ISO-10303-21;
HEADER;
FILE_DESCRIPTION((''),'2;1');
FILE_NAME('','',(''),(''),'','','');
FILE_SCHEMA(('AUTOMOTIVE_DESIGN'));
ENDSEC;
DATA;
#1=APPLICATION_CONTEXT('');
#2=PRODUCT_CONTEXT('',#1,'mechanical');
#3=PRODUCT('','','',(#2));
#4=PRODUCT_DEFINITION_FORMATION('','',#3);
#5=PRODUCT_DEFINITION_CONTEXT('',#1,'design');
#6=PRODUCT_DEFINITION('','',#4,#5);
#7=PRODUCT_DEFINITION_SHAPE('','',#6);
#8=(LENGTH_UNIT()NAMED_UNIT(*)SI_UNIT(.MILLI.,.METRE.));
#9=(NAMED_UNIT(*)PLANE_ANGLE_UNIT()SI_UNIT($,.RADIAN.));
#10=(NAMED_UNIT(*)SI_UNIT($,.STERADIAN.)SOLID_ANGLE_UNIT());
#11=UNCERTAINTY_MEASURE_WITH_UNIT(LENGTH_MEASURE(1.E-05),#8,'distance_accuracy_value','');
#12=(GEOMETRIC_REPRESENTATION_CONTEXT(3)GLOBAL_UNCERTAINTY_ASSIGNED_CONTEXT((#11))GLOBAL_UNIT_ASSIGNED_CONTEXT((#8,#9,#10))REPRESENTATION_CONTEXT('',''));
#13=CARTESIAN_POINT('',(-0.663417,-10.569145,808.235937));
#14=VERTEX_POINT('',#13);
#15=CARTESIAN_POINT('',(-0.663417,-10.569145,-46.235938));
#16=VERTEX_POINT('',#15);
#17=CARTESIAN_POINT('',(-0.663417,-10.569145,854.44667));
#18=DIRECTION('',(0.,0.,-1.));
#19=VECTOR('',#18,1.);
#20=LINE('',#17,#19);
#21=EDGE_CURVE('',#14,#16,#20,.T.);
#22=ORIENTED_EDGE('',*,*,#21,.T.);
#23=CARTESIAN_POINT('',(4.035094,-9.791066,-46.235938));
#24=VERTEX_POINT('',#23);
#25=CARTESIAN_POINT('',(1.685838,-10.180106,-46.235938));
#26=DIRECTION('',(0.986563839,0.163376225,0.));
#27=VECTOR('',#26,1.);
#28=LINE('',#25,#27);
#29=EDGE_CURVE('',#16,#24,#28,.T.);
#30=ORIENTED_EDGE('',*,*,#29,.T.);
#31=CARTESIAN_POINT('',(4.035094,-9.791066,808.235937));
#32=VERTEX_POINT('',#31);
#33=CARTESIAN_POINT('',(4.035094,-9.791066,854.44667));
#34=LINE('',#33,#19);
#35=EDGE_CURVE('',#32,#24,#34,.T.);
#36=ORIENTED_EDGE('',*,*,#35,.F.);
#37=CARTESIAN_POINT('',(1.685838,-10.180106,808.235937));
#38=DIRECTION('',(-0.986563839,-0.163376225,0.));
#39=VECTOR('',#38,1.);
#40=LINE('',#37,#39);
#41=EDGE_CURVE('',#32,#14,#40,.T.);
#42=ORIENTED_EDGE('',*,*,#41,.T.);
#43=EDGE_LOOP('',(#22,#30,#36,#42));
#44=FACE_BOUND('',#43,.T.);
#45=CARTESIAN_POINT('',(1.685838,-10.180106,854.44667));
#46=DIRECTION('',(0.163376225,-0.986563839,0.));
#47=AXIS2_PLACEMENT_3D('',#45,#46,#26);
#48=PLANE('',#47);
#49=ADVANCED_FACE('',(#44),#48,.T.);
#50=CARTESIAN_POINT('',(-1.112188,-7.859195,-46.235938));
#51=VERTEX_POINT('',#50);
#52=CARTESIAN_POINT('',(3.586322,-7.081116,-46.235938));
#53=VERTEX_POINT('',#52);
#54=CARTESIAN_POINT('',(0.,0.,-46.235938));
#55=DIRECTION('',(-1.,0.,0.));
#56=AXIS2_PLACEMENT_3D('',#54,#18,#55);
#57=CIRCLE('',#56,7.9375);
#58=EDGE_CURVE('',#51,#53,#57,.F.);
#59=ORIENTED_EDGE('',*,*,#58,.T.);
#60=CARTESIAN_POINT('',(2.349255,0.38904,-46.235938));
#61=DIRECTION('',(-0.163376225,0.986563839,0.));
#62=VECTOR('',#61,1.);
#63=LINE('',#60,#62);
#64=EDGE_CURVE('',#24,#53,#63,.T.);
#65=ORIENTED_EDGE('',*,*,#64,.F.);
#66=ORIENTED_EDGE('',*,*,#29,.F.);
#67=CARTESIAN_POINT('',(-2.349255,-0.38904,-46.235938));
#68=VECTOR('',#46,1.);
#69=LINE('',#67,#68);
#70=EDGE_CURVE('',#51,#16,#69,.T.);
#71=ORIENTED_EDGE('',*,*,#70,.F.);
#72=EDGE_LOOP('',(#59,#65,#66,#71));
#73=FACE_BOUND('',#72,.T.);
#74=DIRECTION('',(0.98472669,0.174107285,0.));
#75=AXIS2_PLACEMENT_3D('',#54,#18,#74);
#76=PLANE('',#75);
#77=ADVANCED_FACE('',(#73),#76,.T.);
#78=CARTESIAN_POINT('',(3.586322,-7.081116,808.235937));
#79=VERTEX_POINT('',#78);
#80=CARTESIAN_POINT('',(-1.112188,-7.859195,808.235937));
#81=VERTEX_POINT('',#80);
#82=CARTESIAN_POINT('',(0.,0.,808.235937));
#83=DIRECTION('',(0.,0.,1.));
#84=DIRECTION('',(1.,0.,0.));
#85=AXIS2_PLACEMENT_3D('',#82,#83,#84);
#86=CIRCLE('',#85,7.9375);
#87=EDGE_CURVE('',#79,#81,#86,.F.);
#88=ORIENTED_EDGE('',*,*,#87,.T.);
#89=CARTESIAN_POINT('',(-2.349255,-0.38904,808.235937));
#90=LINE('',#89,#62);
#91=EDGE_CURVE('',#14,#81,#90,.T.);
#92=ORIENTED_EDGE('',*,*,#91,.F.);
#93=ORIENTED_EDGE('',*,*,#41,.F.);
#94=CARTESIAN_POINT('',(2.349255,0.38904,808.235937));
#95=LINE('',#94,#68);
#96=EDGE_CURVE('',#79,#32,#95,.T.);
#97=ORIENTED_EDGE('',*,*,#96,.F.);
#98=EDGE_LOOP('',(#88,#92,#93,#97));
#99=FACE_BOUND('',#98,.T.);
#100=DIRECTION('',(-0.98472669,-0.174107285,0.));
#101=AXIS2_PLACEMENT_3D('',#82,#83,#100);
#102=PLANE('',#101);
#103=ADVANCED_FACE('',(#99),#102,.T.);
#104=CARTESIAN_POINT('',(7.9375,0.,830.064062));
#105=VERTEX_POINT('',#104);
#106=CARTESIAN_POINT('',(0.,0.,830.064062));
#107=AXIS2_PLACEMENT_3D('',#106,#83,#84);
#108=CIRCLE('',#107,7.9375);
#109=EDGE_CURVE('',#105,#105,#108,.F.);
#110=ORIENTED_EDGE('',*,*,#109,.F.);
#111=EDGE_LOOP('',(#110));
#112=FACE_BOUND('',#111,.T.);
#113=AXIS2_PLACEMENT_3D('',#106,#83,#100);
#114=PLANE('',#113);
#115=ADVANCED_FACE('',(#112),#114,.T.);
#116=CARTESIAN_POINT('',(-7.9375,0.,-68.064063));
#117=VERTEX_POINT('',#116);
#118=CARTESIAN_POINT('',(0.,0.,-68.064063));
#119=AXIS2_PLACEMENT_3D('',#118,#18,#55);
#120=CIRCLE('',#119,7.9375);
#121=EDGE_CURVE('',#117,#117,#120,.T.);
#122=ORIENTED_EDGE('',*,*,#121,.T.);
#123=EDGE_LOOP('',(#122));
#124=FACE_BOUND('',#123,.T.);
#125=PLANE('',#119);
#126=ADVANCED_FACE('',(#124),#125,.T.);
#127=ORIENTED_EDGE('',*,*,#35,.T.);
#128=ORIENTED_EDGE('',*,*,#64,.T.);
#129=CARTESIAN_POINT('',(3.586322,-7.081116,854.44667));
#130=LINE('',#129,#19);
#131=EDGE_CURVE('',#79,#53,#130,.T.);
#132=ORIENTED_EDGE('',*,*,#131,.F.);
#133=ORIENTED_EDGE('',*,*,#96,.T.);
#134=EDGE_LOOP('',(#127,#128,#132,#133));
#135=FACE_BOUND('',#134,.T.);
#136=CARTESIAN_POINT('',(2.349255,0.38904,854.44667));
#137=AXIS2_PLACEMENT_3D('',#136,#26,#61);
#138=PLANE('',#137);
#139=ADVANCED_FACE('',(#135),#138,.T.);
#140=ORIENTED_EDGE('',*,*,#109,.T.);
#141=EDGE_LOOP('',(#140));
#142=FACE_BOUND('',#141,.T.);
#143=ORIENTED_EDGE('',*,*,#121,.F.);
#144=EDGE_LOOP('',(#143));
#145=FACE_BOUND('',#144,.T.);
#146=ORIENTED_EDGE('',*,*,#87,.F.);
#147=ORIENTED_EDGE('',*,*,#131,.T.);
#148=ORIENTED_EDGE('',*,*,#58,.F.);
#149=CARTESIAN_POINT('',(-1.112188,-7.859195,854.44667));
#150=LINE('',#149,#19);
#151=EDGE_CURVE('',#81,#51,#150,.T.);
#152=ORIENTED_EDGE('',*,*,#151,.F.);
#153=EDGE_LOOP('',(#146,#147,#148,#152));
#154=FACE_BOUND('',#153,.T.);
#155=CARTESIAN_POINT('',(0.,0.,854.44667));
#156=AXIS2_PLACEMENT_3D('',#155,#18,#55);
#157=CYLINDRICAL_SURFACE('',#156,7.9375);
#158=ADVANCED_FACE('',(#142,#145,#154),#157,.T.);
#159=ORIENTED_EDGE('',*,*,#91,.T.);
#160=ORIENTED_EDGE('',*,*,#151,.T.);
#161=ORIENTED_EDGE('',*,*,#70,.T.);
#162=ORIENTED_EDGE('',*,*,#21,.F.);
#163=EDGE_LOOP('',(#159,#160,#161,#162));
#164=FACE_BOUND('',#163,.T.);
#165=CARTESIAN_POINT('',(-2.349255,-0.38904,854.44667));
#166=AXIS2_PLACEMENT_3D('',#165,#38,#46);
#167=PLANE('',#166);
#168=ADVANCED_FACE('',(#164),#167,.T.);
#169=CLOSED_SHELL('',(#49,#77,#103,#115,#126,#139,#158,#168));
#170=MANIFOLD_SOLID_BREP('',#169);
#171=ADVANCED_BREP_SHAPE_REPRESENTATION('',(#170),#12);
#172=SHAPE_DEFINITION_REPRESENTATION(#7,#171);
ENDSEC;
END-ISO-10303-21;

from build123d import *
from OCP.BRepAlgoAPI import BRepAlgoAPI_Cut
from OCP.TopTools import TopTools_ListOfShape

# Parameters (mm, degrees)
BOSS_EXTRUDE1_START = -68.064063
BOSS_EXTRUDE1_DEPTH = 898.128125
CUT_EXTRUDE1_START  = -21.828125
SKETCH2_R           = 10.589945851
SKETCH2_R_2         = 7.9375
CUT_EXTRUDE1_DEPTH  = 21.828125
CUT_EXTRUDE2_START  = -898.128125
SKETCH2_2_R         = 10.589945851
SKETCH2_2_R_2       = 7.9375
CUT_EXTRUDE2_DEPTH  = 21.828125


with BuildPart() as part:
    # Sketch1 → Boss-Extrude1 (new body)
    with BuildSketch(Plane.XY.offset(BOSS_EXTRUDE1_START)):
        with BuildLine():
            Line((4.035093565, -9.791065981), (3.586322342, -7.081115612))
            ThreePointArc((3.586322342, -7.081115612), (-1.296798787, 7.830850475), (-1.112187943, -7.859194884))
            Line((-1.112187943, -7.859194884), (-0.663416719, -10.569145253))
            Line((-0.663416719, -10.569145253), (4.035093565, -9.791065981))
        make_face()
    extrude(amount=BOSS_EXTRUDE1_DEPTH)

    # Sketch2 → Cut-Extrude1 (cut)
    with BuildSketch(Plane.XY.offset(830.0640625).offset(CUT_EXTRUDE1_START)):
        Circle(SKETCH2_R)
        with Locations(Location((0, 0, 0), (0, 0, 261.945315936))):
            Circle(SKETCH2_R_2, mode=Mode.SUBTRACT)
    extrude(amount=CUT_EXTRUDE1_DEPTH, mode=Mode.SUBTRACT)


with BuildPart() as cut_extrude2_tool:
    # Sketch2<2> → Cut-Extrude2 (new body)
    with BuildSketch(Plane.XY.offset(830.0640625).offset(CUT_EXTRUDE2_START)):
        Circle(SKETCH2_2_R)
        with Locations(Location((0, 0, 0), (0, 0, 180))):
            Circle(SKETCH2_2_R_2, mode=Mode.SUBTRACT)
    extrude(amount=CUT_EXTRUDE2_DEPTH)


with BuildPart() as part_1:
    add(part.part)

    # Cut-Extrude2: cut by cut_extrude2_tool, with a tolerance
    cut_extrude2_stock = TopTools_ListOfShape()
    cut_extrude2_stock.Append(part_1.part.wrapped)
    cut_extrude2_tools = TopTools_ListOfShape()
    cut_extrude2_tools.Append(cut_extrude2_tool.part.wrapped)
    cut_extrude2_cut = BRepAlgoAPI_Cut()
    cut_extrude2_cut.SetArguments(cut_extrude2_stock)
    cut_extrude2_cut.SetTools(cut_extrude2_tools)
    cut_extrude2_cut.SetFuzzyValue(0.00001)
    cut_extrude2_cut.Build()
    add(Compound.cast(cut_extrude2_cut.Shape()).solids(), mode=Mode.REPLACE)


solid = part_1.part
